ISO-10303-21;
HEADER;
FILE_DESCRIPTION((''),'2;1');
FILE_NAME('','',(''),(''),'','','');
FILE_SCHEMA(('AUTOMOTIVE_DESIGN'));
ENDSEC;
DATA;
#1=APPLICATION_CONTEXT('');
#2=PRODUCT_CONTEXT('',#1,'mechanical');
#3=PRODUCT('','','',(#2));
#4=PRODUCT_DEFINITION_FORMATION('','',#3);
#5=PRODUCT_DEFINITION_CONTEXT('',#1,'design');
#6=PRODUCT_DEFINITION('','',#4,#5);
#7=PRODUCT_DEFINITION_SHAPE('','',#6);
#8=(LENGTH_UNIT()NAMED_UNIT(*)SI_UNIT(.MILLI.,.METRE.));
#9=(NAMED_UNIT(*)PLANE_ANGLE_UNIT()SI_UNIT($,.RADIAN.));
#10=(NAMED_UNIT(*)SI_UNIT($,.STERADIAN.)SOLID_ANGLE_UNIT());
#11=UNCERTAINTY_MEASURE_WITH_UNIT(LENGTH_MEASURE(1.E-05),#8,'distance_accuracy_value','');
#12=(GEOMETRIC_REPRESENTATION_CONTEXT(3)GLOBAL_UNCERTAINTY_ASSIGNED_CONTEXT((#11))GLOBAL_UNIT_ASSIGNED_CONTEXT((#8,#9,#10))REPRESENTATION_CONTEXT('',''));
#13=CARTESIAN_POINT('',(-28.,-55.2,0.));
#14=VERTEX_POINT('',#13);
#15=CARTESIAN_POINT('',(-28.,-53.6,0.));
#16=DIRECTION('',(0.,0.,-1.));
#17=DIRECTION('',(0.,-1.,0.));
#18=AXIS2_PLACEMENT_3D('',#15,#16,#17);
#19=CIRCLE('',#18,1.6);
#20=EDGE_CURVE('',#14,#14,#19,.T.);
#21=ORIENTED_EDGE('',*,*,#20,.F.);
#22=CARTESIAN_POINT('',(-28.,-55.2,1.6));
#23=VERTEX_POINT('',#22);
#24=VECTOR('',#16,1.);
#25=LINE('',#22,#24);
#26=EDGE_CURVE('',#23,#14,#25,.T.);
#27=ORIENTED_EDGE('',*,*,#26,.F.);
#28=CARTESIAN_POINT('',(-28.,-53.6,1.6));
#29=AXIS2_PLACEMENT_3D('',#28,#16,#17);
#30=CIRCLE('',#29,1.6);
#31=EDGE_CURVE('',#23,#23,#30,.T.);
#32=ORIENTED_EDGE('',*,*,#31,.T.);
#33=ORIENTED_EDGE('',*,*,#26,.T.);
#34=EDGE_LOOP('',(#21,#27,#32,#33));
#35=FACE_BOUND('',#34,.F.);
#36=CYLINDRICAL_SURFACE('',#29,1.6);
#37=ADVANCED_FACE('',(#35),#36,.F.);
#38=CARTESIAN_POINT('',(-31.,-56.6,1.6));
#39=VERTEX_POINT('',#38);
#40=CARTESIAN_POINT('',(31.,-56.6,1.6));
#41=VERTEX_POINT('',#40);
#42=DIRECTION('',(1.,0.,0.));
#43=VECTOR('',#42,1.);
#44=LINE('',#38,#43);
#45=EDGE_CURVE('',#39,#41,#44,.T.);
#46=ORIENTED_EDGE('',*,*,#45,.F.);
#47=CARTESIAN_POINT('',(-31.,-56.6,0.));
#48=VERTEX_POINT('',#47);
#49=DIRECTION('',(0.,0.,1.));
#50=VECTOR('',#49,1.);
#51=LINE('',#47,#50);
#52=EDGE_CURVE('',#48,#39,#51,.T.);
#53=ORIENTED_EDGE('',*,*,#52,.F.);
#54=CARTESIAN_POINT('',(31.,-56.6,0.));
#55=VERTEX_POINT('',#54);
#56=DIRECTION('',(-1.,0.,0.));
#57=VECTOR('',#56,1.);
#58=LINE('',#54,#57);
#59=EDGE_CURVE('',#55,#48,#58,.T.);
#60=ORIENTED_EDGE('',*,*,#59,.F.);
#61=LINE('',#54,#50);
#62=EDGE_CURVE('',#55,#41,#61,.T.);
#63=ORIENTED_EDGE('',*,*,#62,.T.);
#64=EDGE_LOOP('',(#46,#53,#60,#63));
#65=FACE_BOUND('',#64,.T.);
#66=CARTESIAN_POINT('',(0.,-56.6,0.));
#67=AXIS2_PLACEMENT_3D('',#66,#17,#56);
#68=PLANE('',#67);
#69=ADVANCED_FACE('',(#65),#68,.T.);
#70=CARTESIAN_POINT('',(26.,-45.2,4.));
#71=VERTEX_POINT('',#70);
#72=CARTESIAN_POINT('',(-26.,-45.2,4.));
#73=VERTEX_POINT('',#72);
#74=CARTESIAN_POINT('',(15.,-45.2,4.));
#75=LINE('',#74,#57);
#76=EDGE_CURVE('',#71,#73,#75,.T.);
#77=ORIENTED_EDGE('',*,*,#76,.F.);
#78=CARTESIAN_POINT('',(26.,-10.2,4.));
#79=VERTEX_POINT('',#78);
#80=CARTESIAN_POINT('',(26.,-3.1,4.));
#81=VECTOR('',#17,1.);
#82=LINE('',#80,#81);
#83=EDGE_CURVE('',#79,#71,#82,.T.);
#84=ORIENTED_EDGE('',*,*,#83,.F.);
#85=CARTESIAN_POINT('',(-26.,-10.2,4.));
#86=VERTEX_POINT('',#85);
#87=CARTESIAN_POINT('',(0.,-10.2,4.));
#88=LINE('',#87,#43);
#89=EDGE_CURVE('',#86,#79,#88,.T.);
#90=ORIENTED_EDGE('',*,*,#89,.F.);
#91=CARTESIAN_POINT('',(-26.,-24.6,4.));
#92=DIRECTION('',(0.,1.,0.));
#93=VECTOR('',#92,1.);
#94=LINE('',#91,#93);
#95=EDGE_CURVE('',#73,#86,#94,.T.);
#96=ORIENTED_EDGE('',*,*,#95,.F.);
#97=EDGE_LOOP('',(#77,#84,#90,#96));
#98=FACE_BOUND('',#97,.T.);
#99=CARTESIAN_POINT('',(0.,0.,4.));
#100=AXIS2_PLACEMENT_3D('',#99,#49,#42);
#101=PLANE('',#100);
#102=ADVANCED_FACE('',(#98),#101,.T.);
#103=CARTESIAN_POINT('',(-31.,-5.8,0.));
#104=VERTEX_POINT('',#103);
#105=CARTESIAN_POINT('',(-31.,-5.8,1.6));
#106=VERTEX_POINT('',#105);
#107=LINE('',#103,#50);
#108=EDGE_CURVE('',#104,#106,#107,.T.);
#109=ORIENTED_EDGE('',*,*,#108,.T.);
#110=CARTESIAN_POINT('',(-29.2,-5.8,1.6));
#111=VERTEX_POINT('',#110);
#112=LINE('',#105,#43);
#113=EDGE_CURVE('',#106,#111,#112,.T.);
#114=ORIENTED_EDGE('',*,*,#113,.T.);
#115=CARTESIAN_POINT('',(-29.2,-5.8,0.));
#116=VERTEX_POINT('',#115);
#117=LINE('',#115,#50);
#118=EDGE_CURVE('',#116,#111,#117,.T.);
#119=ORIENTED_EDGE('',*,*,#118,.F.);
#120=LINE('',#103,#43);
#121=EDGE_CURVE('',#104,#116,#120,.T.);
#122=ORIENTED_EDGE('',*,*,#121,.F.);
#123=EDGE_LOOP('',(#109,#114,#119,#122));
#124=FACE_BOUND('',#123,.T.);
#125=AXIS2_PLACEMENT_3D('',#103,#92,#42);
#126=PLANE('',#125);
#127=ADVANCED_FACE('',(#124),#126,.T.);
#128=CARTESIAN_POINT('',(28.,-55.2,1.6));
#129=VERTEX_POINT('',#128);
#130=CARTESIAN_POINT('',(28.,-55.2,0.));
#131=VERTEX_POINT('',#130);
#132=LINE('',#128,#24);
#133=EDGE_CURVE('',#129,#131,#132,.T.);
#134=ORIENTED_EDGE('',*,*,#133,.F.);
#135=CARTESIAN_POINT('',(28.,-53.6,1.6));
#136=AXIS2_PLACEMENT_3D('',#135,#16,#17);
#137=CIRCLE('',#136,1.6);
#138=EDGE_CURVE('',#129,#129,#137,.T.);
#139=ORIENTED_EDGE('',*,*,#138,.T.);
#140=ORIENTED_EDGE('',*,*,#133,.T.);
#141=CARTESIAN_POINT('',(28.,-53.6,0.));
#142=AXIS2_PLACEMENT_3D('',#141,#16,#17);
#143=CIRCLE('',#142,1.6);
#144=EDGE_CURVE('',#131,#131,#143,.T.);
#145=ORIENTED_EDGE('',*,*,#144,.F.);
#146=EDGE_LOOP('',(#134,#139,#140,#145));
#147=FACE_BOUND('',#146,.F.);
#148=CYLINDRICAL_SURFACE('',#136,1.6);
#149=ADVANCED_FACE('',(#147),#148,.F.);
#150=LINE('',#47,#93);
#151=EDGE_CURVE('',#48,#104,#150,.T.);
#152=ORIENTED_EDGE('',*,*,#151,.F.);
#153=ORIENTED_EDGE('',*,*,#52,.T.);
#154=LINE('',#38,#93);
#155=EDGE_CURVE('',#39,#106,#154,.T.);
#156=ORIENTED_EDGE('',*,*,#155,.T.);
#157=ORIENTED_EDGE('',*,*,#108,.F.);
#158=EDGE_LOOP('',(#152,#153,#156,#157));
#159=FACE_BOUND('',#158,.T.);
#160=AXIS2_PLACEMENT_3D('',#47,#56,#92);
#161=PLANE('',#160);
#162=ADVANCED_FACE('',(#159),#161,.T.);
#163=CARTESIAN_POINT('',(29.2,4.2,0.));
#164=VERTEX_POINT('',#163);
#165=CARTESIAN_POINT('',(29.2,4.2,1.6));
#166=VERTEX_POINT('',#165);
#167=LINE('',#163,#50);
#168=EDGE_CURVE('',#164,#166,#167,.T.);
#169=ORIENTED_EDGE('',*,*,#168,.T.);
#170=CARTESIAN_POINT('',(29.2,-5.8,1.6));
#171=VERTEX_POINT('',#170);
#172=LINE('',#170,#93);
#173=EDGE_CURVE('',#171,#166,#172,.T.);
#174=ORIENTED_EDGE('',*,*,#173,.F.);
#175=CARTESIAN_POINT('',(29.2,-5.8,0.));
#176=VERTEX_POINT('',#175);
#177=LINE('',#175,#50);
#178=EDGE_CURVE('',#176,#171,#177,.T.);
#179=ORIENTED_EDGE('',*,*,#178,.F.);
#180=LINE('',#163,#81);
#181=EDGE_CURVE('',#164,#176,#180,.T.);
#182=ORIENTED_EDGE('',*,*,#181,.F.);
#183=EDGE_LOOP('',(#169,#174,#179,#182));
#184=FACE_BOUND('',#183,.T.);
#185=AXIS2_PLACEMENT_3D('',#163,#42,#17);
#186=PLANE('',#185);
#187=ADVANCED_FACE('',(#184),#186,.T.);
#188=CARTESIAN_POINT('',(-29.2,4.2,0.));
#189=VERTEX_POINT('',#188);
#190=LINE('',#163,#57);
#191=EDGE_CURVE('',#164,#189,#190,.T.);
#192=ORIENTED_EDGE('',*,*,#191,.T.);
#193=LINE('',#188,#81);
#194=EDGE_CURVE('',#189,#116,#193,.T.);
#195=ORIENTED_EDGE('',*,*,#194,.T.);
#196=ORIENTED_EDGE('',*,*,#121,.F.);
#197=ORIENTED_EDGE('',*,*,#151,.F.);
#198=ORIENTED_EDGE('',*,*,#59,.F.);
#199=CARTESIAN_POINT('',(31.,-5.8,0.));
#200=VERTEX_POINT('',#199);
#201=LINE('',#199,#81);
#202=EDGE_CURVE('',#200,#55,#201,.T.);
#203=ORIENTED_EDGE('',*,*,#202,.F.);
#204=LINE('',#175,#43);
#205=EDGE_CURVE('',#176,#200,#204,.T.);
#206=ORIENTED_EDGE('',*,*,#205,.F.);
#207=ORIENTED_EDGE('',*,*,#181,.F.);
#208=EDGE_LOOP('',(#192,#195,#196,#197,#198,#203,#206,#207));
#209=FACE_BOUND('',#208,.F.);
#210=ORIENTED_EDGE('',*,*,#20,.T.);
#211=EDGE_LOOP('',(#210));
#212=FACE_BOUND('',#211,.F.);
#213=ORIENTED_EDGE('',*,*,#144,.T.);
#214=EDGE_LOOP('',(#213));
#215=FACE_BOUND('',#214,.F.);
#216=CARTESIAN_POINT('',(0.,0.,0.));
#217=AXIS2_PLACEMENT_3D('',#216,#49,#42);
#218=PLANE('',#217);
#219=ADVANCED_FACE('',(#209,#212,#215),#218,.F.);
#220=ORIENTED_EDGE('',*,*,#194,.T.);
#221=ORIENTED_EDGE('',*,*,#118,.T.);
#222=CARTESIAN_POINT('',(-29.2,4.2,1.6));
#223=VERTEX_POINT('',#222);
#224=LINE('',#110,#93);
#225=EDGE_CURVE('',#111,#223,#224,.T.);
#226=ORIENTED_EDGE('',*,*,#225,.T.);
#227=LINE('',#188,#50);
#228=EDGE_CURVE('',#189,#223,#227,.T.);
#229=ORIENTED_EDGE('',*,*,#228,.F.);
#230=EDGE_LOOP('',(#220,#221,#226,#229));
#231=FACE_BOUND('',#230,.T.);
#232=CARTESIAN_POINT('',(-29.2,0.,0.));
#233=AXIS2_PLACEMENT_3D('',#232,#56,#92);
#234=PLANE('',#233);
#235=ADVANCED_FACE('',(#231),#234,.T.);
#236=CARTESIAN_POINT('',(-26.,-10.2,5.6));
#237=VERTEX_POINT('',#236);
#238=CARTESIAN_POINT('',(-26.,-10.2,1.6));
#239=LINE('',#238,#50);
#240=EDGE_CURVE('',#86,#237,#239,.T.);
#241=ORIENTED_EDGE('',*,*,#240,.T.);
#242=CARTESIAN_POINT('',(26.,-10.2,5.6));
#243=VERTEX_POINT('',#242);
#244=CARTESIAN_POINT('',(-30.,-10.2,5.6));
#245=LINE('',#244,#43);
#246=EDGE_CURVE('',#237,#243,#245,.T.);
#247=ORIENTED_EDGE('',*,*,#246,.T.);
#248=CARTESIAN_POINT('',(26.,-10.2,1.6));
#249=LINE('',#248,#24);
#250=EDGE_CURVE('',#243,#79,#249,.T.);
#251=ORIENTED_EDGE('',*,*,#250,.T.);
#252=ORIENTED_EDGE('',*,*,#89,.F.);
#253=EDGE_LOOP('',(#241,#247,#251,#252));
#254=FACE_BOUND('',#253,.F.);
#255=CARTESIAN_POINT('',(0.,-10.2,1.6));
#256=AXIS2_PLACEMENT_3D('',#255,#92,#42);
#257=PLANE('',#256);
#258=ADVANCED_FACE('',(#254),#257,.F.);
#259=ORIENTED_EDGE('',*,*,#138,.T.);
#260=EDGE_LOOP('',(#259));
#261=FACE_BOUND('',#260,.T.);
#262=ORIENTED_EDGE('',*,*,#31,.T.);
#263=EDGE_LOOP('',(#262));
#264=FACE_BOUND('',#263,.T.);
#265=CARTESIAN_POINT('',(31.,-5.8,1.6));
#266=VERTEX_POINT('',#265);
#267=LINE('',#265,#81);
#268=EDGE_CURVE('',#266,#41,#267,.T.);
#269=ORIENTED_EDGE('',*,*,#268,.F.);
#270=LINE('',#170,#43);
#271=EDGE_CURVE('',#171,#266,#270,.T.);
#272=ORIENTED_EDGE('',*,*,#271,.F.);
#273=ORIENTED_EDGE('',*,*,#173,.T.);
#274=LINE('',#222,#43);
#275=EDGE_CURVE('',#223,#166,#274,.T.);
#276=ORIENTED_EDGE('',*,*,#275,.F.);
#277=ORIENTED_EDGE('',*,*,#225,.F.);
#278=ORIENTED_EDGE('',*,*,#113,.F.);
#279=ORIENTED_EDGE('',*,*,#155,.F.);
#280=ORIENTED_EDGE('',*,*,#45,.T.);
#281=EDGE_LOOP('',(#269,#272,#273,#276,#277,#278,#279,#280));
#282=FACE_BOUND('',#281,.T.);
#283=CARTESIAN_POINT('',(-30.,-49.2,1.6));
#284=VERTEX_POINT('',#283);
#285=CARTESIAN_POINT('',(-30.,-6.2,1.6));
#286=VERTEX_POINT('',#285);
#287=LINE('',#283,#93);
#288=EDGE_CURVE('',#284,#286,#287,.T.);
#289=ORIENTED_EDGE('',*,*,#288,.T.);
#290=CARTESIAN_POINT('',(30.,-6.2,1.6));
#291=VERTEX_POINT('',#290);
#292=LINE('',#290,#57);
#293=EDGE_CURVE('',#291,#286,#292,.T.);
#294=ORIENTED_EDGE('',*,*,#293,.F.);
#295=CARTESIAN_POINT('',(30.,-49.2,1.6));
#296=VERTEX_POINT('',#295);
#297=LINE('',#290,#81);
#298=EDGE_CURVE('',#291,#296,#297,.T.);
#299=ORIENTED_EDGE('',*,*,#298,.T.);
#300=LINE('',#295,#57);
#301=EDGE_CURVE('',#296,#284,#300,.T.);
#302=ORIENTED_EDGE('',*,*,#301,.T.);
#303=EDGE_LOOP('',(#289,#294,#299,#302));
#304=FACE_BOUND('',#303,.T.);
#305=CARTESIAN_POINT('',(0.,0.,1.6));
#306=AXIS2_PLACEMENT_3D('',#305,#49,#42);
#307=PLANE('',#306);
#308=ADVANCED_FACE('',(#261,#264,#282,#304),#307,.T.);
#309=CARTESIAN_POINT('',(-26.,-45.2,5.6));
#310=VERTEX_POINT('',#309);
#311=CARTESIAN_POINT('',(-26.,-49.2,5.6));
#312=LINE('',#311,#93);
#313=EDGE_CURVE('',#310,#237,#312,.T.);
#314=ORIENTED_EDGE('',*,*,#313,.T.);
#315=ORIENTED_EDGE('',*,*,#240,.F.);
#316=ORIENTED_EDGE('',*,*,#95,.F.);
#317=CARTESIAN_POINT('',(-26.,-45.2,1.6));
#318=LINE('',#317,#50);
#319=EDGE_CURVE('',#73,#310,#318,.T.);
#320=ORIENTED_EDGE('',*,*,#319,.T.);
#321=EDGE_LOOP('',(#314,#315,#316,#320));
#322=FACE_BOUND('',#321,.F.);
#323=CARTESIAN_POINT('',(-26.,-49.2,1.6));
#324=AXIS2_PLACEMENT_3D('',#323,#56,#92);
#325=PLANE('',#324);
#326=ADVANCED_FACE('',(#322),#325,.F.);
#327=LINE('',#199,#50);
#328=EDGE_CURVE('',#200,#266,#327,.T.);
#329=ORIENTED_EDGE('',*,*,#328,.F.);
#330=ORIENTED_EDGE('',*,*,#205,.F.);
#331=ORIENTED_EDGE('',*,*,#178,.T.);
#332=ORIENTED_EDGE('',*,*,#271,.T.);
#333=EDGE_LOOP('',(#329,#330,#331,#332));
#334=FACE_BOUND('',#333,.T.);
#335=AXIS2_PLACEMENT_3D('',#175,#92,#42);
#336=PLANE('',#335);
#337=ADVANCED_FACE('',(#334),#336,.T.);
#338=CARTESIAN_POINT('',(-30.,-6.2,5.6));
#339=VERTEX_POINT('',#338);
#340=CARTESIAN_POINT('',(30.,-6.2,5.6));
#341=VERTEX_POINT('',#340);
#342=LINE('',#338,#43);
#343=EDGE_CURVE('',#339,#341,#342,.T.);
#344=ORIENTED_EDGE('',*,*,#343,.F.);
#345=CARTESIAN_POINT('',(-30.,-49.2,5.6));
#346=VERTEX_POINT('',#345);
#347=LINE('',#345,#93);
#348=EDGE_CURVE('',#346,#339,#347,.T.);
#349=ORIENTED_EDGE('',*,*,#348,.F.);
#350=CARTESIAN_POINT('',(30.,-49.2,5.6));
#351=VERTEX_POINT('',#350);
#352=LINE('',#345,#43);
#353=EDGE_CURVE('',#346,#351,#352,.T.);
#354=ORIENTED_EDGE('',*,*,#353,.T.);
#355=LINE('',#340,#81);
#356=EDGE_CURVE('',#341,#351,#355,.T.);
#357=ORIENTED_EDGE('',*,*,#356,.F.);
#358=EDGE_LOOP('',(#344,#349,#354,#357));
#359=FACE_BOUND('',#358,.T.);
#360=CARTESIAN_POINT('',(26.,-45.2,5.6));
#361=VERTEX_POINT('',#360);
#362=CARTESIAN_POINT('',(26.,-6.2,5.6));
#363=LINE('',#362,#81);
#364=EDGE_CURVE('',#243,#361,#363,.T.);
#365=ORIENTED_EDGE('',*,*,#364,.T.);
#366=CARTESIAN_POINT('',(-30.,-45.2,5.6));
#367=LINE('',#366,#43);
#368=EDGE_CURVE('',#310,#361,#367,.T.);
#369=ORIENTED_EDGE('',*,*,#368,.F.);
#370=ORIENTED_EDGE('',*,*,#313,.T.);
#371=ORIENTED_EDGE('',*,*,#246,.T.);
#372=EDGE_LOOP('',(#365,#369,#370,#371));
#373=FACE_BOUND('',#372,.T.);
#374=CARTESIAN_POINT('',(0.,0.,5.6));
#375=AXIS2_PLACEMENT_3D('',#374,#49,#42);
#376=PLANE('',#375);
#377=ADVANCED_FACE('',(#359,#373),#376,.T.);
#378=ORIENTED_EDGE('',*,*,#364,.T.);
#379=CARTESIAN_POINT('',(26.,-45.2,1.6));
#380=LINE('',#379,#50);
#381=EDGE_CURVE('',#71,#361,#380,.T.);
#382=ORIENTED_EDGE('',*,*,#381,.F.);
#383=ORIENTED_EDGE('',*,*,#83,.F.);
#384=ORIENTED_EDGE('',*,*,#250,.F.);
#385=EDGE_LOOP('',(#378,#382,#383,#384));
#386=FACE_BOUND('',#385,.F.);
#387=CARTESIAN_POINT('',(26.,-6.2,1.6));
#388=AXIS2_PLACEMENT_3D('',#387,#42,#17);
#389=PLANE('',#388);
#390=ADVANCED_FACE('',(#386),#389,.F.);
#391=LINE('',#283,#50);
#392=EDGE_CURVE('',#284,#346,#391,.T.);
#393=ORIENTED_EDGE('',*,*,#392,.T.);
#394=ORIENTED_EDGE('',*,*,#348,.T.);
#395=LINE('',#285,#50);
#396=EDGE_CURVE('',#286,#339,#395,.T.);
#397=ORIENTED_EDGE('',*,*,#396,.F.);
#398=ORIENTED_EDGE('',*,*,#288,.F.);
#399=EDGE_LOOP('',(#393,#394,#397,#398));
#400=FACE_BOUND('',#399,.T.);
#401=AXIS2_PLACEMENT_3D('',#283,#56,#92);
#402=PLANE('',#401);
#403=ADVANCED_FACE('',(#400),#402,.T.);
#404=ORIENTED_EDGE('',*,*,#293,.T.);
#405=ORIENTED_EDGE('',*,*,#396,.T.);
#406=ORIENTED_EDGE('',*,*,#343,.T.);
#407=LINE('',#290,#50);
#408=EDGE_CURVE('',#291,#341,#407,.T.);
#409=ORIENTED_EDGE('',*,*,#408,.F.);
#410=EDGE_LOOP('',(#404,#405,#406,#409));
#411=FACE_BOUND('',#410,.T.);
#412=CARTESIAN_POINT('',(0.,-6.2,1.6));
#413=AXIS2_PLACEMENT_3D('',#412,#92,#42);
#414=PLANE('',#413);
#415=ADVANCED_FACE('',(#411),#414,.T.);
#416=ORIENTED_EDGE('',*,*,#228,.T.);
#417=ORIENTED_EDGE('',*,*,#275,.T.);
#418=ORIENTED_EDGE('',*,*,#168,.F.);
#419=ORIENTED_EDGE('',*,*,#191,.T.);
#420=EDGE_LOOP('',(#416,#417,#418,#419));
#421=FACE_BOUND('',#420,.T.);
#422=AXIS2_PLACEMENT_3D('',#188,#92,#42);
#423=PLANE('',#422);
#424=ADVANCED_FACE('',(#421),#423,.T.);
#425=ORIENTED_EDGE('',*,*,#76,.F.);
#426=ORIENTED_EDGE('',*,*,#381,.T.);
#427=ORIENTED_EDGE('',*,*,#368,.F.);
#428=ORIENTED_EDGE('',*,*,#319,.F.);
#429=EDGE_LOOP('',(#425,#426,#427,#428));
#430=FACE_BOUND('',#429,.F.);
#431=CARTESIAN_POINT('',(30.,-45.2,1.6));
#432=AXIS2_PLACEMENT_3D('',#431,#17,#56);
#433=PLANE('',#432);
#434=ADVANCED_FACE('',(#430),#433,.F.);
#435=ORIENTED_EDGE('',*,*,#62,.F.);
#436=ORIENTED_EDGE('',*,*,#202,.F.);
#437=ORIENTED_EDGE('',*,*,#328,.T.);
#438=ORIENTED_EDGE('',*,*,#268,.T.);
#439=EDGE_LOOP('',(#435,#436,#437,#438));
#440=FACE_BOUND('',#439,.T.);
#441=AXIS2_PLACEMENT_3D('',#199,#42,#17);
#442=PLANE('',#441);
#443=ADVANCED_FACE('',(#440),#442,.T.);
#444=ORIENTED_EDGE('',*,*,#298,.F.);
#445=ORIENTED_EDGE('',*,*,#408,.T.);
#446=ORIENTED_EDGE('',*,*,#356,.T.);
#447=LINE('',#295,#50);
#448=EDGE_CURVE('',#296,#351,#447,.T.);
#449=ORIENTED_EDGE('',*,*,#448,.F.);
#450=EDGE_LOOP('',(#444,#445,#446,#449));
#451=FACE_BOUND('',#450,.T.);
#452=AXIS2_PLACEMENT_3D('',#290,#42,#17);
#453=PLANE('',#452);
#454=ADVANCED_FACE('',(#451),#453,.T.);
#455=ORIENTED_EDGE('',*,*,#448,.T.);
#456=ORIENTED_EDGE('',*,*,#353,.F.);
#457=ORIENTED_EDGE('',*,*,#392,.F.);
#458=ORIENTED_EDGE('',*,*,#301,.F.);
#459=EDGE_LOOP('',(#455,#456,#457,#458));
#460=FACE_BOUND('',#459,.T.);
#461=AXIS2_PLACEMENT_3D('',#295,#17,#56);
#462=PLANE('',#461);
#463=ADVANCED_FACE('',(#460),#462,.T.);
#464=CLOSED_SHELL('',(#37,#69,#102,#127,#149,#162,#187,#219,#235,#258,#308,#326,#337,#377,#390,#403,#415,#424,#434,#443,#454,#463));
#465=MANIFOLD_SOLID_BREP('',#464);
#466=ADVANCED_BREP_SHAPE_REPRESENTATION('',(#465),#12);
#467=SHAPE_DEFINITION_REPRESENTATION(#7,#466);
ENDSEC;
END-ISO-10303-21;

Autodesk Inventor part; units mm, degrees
ref_plane "YZ Plane" through (0, 0, 0) normal (1, 0, 0) x (0, 1, 0)
ref_plane "XZ Plane" through (0, 0, 0) normal (0, 1, 0) x (-1, 0, 0)
ref_plane "XY Plane" through (0, 0, 0) normal (0, 0, 1) x (1, 0, 0)
sketch "Skizze1" plane through (0, 0, 0) normal (0, 0, 1) x (1, 0, 0)
  line L0 (-29.2, 4.2) -> (29.2, 4.2)
  line L1 (29.2, 4.2) -> (29.2, -5.8)
  line L2 (29.2, -5.8) -> (31, -5.8)
  line L3 (31, -5.8) -> (31, -56.6)
  line L4 (31, -56.6) -> (-31, -56.6)
  line L5 (-31, -56.6) -> (-31, -5.8)
  line L6 (-31, -5.8) -> (-29.2, -5.8)
  line L7 (-29.2, -5.8) -> (-29.2, 4.2)
  line L8 (-43.4, 0) -> (43.4, 0) projected
  line L9 (0, 16.36) -> (0, -68.76) projected
  point P0 (0, 0)
  dimension "d0" = 4.2
  dimension "d1" = 5.8
  dimension "d2" = 56.6
  dimension "d3" = 62
  dimension "d4" = 58.4
extrude "Extrusion1" add sketch "Skizze1" along normal blind 1.6
sketch "Skizze2" plane through (0, 0, 1.6) normal (0, 0, 1) x (1, 0, 0)
  line L0 (-28, -53.6) -> (28, -53.6) construction
  line L1 (0, 16.36) -> (0, -68.76) construction
  line L2 (-43.4, 0) -> (43.4, 0) construction
  point P0 (0, 0)
  dimension "d7" = 53.6
  dimension "d8" = 56
hole "Bohrung1" at (-28, -53.6, 1.6) at (28, -53.6, 1.6) direction (0, 0, -1) diameter 3.2 end through all
sketch "Skizze3" plane through (0, 0, 1.6) normal (0, 0, 1) x (1, 0, 0)
  line L0 (0, 16.36) -> (0, -68.76) projected
  line L1 (-43.4, 0) -> (43.4, 0) projected
  line L2 (-30, -6.2) -> (30, -6.2)
  line L3 (30, -6.2) -> (30, -49.2)
  line L4 (30, -49.2) -> (-30, -49.2)
  line L5 (-30, -49.2) -> (-30, -6.2)
  point P0 (0, 0)
  dimension "d16" = 60
  dimension "d17" = 43
  dimension "d18" = 6.2
extrude "Extrusion2" add sketch "Skizze3" along normal blind 4
shell "Wandung1" thickness 4 removed faces 1 at (10, -20.5333, 5.6)
properties part number "LT24" material "Phenolharz"
